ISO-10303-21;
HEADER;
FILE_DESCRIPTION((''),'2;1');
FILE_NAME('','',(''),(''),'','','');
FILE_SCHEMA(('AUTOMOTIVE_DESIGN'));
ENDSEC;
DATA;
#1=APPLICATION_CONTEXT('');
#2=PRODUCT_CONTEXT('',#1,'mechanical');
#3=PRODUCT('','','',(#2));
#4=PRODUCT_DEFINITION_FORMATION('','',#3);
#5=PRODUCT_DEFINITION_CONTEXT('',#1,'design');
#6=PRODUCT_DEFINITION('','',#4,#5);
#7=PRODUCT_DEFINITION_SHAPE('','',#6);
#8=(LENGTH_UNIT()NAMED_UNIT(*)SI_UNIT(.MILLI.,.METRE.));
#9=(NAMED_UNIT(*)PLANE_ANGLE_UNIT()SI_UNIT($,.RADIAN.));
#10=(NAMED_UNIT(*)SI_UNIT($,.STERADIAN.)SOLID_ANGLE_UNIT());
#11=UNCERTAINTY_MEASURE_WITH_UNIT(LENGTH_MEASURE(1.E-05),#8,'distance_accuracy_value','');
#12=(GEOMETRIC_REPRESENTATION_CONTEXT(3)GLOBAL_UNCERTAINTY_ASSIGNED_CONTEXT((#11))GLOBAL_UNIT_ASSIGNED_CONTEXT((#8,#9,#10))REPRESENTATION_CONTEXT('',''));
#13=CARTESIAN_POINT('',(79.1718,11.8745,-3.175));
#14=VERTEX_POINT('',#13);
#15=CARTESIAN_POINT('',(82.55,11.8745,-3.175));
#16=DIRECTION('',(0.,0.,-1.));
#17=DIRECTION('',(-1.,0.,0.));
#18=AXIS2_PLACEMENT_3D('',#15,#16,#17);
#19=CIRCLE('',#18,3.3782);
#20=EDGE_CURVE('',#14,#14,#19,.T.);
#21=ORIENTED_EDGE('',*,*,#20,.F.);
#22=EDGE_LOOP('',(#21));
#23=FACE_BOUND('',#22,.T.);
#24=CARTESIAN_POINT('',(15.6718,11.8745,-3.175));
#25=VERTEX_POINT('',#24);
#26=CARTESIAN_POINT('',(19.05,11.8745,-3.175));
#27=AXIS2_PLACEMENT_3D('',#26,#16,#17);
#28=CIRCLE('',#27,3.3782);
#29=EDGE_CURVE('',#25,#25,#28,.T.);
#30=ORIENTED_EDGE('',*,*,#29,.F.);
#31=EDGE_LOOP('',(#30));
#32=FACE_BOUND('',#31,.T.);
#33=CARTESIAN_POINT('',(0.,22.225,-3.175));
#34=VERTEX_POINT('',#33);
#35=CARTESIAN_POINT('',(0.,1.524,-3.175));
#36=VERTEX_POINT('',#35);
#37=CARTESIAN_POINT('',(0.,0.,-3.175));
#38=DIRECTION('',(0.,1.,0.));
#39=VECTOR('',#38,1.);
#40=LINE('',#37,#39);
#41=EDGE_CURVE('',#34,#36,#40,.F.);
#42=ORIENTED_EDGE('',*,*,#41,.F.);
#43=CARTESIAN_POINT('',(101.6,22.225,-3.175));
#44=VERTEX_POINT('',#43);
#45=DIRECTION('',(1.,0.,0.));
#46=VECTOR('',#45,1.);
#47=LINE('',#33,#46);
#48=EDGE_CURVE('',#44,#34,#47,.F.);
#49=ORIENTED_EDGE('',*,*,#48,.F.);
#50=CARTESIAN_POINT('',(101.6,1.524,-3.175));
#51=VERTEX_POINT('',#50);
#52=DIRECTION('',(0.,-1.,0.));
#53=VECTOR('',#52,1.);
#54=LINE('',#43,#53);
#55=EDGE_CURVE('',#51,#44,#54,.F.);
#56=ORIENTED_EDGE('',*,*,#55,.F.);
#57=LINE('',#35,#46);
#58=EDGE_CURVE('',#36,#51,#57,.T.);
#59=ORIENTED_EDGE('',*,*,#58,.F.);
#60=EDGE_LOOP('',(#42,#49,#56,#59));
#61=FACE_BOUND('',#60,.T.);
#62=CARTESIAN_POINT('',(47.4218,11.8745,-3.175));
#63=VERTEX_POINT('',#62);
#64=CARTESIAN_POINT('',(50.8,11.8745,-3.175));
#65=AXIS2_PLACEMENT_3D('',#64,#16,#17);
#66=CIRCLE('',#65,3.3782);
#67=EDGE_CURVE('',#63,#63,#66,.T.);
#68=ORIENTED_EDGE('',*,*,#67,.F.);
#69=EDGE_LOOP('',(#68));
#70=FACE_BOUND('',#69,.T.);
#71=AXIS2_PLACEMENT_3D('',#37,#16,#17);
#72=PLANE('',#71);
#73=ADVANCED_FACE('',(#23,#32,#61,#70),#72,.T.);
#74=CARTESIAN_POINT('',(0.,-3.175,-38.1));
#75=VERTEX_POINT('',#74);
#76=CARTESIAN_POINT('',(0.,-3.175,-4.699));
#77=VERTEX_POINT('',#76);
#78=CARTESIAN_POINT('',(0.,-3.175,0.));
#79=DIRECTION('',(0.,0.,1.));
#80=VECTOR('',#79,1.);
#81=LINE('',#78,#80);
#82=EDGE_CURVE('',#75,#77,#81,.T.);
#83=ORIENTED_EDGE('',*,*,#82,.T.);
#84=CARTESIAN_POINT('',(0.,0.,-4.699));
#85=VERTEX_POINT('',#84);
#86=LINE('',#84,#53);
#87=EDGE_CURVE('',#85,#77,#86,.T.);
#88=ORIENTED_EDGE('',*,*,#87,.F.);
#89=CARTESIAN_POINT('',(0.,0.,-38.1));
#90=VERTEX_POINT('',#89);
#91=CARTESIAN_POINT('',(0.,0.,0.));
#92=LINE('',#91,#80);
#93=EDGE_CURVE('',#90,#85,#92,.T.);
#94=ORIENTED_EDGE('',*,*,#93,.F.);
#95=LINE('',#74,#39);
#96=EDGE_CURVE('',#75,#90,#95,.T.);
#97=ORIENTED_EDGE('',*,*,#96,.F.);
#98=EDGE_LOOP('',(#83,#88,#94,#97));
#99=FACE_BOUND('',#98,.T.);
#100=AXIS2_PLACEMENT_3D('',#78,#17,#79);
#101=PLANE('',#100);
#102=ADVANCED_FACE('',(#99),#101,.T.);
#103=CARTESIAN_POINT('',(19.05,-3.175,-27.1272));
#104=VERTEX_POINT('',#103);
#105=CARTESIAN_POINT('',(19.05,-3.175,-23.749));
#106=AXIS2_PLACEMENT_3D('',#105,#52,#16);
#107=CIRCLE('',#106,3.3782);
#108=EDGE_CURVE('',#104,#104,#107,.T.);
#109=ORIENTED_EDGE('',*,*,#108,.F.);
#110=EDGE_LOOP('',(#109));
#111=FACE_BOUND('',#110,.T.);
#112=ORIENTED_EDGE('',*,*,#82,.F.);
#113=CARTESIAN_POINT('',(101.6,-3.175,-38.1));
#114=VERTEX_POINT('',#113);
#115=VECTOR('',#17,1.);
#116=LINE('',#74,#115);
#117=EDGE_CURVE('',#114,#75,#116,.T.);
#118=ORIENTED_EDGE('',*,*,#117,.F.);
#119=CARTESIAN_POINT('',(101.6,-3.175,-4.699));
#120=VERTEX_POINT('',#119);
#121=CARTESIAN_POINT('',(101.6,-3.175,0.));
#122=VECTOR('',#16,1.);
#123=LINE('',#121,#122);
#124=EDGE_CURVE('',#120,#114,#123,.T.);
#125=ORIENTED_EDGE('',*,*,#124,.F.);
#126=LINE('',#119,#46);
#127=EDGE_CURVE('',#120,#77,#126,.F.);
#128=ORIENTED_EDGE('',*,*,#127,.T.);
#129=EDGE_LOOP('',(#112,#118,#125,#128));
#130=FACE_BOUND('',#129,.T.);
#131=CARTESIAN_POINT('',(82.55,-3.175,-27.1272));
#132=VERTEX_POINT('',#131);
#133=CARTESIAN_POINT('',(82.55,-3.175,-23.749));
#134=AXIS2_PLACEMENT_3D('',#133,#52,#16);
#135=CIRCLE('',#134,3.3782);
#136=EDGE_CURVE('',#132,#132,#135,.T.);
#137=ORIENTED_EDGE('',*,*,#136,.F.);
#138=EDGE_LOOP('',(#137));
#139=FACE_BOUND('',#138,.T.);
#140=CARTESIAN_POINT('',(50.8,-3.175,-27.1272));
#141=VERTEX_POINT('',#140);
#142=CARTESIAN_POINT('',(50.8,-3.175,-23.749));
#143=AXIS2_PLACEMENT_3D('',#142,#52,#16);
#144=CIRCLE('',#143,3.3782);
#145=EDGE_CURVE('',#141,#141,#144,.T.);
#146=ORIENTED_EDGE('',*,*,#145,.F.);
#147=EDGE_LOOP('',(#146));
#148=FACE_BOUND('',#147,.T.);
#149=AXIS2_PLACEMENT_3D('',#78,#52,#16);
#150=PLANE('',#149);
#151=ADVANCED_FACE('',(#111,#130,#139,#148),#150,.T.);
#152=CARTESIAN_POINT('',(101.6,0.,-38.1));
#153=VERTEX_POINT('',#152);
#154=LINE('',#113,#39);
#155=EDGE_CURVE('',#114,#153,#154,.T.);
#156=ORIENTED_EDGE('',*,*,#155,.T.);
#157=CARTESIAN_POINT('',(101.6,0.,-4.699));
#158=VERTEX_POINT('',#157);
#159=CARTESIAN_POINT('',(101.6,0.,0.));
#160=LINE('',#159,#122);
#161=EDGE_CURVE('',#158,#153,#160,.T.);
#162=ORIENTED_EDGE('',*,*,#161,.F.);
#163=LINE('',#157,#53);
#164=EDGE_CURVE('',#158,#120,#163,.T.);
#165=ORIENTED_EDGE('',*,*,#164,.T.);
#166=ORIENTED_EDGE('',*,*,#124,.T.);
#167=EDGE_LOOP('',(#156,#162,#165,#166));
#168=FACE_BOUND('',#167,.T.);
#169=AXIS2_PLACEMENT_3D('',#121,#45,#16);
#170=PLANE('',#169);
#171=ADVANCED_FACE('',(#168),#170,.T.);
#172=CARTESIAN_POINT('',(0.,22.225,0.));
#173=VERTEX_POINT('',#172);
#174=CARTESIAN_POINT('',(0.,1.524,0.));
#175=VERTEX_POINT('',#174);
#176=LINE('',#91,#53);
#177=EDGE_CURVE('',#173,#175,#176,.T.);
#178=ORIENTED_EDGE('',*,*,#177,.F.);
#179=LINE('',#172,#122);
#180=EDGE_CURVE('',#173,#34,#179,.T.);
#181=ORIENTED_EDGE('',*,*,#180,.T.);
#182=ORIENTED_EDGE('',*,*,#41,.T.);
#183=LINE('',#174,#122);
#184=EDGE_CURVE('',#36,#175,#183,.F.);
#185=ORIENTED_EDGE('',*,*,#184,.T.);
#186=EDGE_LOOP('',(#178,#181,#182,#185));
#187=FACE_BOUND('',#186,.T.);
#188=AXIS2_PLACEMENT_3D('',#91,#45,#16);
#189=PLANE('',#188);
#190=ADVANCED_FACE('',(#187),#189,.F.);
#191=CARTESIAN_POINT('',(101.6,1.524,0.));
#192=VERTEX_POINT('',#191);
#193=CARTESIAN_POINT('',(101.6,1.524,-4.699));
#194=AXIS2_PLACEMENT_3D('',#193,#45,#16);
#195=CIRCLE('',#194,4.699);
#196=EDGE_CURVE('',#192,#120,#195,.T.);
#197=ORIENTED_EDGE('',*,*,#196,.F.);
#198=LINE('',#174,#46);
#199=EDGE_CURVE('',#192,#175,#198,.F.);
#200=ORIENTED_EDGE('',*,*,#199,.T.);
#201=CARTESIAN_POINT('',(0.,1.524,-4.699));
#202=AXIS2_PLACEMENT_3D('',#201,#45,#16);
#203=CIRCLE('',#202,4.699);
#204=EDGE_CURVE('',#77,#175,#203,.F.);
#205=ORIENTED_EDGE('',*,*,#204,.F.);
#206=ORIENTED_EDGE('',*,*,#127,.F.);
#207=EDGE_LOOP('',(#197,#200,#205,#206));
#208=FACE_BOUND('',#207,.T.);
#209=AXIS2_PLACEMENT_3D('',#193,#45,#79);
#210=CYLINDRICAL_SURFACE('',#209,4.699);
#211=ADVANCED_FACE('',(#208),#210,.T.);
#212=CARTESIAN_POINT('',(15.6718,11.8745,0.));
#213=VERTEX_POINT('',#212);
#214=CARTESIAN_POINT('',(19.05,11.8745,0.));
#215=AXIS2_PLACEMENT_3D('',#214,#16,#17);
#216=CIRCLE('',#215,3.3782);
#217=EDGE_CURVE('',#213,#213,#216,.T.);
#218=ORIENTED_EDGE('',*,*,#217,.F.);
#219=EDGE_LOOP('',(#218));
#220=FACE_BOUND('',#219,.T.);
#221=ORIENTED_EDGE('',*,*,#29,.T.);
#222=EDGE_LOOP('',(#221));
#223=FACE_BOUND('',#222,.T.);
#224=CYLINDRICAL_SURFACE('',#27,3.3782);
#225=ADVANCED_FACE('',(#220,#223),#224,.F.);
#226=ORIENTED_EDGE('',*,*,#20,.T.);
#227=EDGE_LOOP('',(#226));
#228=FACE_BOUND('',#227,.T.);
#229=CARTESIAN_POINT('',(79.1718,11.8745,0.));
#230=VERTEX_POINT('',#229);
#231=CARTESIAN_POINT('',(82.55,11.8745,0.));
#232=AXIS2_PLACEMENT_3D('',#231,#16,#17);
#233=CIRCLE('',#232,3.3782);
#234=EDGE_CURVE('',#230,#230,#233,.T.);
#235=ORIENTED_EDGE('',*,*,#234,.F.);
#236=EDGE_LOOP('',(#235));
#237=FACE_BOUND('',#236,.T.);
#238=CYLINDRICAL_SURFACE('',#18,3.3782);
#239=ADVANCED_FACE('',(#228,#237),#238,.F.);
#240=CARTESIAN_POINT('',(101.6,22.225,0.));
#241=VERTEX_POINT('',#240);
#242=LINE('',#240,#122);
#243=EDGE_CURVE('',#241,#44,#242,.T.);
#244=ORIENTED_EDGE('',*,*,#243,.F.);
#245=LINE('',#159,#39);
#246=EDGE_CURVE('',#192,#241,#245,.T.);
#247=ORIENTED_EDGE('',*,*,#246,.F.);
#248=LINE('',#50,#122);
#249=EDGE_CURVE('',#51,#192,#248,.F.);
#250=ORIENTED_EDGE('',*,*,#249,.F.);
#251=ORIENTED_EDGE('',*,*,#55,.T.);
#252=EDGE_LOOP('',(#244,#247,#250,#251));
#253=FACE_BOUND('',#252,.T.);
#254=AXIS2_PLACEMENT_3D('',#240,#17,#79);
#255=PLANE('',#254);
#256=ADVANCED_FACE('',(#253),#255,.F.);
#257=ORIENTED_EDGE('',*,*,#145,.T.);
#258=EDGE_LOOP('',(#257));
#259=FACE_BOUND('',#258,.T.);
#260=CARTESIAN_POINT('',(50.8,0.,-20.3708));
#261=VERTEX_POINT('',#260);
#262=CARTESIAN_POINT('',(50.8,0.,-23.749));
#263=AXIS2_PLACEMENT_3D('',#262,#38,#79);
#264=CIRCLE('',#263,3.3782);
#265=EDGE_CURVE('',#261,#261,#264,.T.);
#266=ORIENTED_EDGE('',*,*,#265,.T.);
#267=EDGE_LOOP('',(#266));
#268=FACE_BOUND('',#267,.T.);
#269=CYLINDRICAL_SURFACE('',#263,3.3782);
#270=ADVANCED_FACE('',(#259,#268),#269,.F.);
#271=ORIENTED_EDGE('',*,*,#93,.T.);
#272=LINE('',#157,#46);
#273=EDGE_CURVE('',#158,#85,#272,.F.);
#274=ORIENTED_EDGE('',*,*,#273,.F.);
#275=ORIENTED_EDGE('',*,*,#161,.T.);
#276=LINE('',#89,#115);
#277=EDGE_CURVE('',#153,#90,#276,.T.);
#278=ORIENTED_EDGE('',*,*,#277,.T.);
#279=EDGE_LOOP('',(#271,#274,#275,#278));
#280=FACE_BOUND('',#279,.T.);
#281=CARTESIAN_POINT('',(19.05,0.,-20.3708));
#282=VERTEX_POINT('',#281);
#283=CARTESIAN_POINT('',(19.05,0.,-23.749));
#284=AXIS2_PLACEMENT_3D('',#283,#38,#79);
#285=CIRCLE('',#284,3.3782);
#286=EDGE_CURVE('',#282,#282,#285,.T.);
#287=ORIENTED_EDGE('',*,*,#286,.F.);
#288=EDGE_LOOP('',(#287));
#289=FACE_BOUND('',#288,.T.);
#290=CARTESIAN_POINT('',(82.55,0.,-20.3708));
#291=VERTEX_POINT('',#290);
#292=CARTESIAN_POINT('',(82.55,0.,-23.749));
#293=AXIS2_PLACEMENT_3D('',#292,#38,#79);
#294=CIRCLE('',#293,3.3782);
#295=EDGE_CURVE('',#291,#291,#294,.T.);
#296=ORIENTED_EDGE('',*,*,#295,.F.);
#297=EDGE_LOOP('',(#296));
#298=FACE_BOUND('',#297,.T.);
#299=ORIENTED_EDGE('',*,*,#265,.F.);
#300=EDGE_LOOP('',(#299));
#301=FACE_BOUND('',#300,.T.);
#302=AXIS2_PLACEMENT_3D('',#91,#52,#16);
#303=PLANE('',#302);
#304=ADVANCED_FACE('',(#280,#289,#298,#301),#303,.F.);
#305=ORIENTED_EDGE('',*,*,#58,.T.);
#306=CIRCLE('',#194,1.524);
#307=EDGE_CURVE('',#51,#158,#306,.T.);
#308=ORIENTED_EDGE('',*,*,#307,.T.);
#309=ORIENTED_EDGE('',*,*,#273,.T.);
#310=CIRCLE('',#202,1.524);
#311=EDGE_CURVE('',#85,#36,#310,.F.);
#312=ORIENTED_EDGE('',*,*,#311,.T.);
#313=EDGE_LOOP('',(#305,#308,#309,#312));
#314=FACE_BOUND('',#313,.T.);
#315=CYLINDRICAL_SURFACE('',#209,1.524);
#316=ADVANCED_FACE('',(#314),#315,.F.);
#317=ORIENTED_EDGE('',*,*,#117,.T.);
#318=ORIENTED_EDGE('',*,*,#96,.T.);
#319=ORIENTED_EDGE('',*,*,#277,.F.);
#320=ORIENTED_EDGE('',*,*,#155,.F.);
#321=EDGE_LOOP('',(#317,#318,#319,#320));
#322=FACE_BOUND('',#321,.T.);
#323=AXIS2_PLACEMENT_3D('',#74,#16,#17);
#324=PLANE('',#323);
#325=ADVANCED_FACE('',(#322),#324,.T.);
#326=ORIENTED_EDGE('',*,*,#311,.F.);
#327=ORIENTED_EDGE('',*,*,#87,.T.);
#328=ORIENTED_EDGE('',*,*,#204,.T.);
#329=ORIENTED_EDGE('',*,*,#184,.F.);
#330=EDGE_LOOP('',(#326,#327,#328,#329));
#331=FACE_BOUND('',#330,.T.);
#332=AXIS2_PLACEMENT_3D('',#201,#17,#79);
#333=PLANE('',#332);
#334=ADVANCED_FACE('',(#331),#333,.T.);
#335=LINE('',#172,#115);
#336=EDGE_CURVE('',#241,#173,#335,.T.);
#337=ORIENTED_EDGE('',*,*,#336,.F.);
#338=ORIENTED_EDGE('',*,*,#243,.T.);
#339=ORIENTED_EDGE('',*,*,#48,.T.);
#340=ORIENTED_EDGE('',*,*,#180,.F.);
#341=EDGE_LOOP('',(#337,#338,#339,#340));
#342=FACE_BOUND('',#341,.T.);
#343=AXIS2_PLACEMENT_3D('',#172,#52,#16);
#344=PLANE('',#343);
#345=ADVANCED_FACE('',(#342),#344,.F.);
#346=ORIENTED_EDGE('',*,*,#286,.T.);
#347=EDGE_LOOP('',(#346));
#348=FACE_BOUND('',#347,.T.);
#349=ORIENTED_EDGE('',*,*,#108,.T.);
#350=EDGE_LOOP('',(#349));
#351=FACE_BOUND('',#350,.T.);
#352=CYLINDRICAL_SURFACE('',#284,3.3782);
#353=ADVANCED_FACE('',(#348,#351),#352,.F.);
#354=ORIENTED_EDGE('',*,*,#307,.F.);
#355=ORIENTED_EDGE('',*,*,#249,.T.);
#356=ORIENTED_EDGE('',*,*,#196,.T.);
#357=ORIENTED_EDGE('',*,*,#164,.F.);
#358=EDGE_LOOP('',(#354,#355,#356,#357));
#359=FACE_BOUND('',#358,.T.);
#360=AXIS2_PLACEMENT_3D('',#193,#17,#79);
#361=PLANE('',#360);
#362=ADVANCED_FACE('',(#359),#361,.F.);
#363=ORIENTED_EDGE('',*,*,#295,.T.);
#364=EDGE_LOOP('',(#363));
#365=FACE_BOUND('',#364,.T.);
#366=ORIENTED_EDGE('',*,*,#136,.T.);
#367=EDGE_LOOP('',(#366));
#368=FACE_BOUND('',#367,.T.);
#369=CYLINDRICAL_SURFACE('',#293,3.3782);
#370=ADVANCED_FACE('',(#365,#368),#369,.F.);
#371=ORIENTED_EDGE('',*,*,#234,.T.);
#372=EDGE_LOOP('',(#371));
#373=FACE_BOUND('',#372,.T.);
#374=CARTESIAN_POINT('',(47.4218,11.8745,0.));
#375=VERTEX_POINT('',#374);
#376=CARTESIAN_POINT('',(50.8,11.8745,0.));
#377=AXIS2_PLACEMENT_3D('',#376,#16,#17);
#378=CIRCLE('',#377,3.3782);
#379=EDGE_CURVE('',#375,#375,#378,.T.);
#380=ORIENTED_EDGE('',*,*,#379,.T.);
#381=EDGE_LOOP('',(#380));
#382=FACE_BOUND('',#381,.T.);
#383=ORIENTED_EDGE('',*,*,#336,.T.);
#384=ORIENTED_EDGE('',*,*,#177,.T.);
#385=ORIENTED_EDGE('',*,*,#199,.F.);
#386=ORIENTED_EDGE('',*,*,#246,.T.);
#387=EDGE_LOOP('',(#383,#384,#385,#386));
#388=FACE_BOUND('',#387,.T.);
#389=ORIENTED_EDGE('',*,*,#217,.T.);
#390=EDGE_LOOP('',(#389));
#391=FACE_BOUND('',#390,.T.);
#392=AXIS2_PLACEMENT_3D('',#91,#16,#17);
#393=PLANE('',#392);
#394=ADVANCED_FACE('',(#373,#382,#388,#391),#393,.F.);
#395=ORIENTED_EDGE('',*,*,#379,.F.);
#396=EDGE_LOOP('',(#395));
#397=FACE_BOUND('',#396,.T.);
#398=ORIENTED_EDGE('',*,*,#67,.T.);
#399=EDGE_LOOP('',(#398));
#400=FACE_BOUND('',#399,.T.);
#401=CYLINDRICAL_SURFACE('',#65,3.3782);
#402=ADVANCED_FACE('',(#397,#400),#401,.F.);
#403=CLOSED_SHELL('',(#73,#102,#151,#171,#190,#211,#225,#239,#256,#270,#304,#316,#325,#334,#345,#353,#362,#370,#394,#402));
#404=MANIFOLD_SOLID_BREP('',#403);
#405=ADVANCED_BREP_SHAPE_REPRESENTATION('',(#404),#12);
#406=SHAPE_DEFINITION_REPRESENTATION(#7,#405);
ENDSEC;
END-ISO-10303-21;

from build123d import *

# Parameters (mm, degrees)
SKETCH1_W                         = 101.6
SKETCH1_H                         = 38.1
BASE_FLANGE1_DEPTH                = 3.175
EDGE_FLANGE1_STRIP_W              = 15.748
EDGE_FLANGE1_STRIP_H              = 3.175
EDGE_FLANGE1_STRIP_CUT_DEPTH      = 101.6
EDGE_FLANGE1_DEPTH                = 101.6
F_1_4_CLEARANCE_HOLE1_D           = 6.7564
F_1_4_CLEARANCE_HOLE1_ON_FACE_2_D = 6.7564


# Sheet-metal steps are written as plain solids
with BuildPart() as part:
    # Sketch1 → Base-Flange1 (new body)
    with BuildSketch(Plane(origin=(0, 0, 0), x_dir=(1, 0, 0), z_dir=(0, 1, 0))):
        with Locations((50.8, 19.05)):
            Rectangle(SKETCH1_W, SKETCH1_H)
    extrude(amount=-BASE_FLANGE1_DEPTH)

    # Edge-Flange1 strip (across the edge) → Edge-Flange1 strip cut (cut)
    with BuildSketch(Plane(origin=(0, 0, 0), x_dir=(0, 0, -1), z_dir=(1, 0, 0))):
        with Locations((-3.175, -1.5875)):
            Rectangle(EDGE_FLANGE1_STRIP_W, EDGE_FLANGE1_STRIP_H)
    extrude(amount=EDGE_FLANGE1_STRIP_CUT_DEPTH, mode=Mode.SUBTRACT)

    # Edge-Flange1 section (across the edge) → Edge-Flange1 (add)
    with BuildSketch(Plane(origin=(0, 0, 0), x_dir=(0, 0, -1), z_dir=(1, 0, 0))):
        with BuildLine():
            Line((0, 1.524), (0, 22.225))
            Line((0, 22.225), (3.175, 22.225))
            Line((3.175, 22.225), (3.175, 1.524))
            ThreePointArc((3.175, 1.524), (3.621369265, 0.446369265), (4.699, 0))
            Line((4.699, 0), (4.699, -3.175))
            ThreePointArc((4.699, -3.175), (1.376305235, -1.798694765), (0, 1.524))
        make_face()
    extrude(amount=EDGE_FLANGE1_DEPTH)

    # 1/4 Clearance Hole1 (through all)
    with Locations(Plane(origin=(19.05, 0, -23.749), x_dir=(0, 0, 1), z_dir=(0, 1, 0))):
        with Locations((0, 0), (0, 31.75), (0, 63.5)):
            Hole(F_1_4_CLEARANCE_HOLE1_D / 2)

    # 1/4 Clearance Hole1 on face 2 (through all)
    with Locations(Plane(origin=(19.05, 11.8745, -3.175), x_dir=(-1, 0, 0), z_dir=(0, 0, -1))):
        with Locations((0, 0), (-31.75, 0), (-63.5, 0)):
            Hole(F_1_4_CLEARANCE_HOLE1_ON_FACE_2_D / 2)


solid = part.part
